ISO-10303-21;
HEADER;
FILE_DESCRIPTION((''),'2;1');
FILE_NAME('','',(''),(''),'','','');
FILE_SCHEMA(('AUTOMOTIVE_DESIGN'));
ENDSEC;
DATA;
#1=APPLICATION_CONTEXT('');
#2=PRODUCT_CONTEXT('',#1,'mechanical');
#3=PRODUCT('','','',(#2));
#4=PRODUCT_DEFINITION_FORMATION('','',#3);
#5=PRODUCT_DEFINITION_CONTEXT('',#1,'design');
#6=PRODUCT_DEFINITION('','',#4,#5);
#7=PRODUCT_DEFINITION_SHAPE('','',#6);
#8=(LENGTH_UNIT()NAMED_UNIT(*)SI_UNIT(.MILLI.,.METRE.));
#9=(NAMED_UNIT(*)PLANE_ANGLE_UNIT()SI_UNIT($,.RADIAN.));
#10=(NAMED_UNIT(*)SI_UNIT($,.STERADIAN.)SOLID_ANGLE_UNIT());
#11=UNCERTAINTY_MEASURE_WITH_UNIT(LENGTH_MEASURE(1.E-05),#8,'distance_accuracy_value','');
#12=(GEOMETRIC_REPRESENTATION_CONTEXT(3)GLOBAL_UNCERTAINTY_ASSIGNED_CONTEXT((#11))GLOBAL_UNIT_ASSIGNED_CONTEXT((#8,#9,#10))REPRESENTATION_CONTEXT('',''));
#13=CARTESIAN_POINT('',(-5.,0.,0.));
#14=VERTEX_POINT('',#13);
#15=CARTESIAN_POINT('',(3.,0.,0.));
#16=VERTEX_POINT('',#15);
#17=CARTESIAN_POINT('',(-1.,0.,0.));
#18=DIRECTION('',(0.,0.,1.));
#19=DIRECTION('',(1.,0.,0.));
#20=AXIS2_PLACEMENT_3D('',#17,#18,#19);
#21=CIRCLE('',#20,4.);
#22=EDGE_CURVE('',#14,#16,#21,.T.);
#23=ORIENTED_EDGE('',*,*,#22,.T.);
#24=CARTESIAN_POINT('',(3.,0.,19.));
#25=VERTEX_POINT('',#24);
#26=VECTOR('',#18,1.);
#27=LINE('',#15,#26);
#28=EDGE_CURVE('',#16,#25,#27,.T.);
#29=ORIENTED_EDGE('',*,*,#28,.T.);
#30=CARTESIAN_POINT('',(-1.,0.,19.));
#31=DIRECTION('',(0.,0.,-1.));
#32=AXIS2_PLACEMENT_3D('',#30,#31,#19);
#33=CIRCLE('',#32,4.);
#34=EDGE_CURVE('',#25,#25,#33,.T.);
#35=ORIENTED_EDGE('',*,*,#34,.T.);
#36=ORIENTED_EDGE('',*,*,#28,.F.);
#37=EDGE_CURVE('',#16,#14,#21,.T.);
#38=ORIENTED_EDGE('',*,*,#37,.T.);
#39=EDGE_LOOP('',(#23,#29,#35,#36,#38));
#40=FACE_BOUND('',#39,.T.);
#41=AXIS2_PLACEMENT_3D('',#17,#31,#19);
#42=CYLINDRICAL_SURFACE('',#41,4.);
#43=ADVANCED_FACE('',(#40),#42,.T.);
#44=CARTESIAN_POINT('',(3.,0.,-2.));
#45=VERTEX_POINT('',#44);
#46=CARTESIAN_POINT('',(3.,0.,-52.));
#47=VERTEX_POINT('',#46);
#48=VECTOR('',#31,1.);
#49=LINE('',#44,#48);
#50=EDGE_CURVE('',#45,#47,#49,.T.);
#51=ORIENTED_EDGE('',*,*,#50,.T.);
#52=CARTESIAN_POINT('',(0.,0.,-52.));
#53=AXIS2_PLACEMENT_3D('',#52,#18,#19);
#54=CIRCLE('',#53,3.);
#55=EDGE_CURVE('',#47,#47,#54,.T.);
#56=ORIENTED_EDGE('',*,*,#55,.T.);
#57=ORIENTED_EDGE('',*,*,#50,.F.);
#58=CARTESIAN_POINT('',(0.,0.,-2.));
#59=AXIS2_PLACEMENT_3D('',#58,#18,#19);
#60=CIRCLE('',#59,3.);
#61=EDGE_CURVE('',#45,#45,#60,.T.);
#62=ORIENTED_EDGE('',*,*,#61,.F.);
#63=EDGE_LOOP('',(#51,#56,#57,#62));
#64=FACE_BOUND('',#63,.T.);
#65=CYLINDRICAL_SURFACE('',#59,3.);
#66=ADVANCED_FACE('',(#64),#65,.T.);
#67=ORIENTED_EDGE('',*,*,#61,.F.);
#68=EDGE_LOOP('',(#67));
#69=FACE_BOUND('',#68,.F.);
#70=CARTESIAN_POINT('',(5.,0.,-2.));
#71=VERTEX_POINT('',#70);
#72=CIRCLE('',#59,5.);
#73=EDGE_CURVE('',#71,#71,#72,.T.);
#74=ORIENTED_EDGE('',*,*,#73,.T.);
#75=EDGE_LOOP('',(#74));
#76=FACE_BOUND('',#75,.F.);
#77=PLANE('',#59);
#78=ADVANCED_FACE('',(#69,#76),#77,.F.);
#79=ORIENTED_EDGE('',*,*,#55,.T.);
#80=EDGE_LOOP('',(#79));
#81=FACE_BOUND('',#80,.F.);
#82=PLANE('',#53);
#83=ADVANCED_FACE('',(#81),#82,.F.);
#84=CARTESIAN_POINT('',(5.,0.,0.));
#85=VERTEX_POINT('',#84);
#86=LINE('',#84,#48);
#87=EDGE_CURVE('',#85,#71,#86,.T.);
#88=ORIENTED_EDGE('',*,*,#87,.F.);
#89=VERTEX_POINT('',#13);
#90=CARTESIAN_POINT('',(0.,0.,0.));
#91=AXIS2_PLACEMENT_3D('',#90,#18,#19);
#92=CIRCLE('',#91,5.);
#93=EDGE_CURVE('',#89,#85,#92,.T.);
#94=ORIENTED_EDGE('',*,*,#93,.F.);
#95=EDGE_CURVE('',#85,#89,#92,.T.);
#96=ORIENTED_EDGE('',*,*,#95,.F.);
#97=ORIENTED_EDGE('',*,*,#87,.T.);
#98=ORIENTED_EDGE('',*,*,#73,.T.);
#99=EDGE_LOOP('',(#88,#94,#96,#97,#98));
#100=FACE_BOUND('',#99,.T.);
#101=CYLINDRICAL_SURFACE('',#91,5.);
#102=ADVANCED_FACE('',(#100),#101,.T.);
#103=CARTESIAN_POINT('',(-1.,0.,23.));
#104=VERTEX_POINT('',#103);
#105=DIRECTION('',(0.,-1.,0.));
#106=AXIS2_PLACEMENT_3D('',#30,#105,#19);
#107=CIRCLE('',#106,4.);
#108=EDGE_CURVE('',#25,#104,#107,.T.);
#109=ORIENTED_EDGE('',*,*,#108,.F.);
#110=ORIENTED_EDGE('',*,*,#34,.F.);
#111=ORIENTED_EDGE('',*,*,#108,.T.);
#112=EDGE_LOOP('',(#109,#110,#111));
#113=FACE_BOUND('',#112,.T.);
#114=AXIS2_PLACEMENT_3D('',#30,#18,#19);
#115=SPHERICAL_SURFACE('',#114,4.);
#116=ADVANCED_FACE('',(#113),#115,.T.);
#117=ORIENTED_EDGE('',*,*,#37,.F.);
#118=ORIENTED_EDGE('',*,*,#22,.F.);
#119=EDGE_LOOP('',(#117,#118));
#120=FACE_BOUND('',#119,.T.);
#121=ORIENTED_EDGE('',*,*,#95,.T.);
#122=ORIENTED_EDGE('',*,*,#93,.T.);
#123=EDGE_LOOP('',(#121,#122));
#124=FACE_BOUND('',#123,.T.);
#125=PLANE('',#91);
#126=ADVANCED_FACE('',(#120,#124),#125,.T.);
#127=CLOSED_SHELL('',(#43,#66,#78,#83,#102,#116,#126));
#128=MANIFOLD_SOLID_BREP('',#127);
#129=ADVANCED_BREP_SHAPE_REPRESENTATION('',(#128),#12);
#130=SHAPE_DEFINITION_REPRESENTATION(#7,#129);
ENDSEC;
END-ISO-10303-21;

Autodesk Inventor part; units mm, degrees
ref_plane "YZ Plane" through (0, 0, 0) normal (1, 0, 0) x (0, 1, 0)
ref_plane "XZ Plane" through (0, 0, 0) normal (0, 1, 0) x (-1, 0, 0)
ref_plane "XY Plane" through (0, 0, 0) normal (0, 0, 1) x (1, 0, 0)
sketch "Sketch1" plane through (0, 0, 0) normal (0, 0, 1) x (1, 0, 0)
  circle A0 centre (0, 0) radius 6 projected
  circle A1 centre (0, 0) radius 5
  point P0 (0, 0)
  dimension "d0" = 1
extrude "Extrusion1" add sketch "Sketch1" against normal blind 2 contours A1
sketch "Sketch2" plane through (0, 0, -2) normal (0, 0, 1) x (1, 0, 0)
  circle A0 centre (0, 0) radius 3
  circle A1 centre (0, 0) radius 5 projected
  point P0 (0, 0)
extrude "Extrusion2" add sketch "Sketch2" against normal blind 50 contours A0
sketch "Sketch3" plane through (0, 0, 0) normal (0, 0, 1) x (1, 0, 0)
  circle A0 centre (-1, 0) radius 4
  circle A1 centre (0, 0) radius 5 projected
  point P0 (0, 0)
  dimension "d9" = 8
extrude "Extrusion3" add sketch "Sketch3" along normal blind 23 contours A0
fillet "Fillet2" radius 4 1 edges at (-5, 0, 23)
properties part number "handle_base_rod"
